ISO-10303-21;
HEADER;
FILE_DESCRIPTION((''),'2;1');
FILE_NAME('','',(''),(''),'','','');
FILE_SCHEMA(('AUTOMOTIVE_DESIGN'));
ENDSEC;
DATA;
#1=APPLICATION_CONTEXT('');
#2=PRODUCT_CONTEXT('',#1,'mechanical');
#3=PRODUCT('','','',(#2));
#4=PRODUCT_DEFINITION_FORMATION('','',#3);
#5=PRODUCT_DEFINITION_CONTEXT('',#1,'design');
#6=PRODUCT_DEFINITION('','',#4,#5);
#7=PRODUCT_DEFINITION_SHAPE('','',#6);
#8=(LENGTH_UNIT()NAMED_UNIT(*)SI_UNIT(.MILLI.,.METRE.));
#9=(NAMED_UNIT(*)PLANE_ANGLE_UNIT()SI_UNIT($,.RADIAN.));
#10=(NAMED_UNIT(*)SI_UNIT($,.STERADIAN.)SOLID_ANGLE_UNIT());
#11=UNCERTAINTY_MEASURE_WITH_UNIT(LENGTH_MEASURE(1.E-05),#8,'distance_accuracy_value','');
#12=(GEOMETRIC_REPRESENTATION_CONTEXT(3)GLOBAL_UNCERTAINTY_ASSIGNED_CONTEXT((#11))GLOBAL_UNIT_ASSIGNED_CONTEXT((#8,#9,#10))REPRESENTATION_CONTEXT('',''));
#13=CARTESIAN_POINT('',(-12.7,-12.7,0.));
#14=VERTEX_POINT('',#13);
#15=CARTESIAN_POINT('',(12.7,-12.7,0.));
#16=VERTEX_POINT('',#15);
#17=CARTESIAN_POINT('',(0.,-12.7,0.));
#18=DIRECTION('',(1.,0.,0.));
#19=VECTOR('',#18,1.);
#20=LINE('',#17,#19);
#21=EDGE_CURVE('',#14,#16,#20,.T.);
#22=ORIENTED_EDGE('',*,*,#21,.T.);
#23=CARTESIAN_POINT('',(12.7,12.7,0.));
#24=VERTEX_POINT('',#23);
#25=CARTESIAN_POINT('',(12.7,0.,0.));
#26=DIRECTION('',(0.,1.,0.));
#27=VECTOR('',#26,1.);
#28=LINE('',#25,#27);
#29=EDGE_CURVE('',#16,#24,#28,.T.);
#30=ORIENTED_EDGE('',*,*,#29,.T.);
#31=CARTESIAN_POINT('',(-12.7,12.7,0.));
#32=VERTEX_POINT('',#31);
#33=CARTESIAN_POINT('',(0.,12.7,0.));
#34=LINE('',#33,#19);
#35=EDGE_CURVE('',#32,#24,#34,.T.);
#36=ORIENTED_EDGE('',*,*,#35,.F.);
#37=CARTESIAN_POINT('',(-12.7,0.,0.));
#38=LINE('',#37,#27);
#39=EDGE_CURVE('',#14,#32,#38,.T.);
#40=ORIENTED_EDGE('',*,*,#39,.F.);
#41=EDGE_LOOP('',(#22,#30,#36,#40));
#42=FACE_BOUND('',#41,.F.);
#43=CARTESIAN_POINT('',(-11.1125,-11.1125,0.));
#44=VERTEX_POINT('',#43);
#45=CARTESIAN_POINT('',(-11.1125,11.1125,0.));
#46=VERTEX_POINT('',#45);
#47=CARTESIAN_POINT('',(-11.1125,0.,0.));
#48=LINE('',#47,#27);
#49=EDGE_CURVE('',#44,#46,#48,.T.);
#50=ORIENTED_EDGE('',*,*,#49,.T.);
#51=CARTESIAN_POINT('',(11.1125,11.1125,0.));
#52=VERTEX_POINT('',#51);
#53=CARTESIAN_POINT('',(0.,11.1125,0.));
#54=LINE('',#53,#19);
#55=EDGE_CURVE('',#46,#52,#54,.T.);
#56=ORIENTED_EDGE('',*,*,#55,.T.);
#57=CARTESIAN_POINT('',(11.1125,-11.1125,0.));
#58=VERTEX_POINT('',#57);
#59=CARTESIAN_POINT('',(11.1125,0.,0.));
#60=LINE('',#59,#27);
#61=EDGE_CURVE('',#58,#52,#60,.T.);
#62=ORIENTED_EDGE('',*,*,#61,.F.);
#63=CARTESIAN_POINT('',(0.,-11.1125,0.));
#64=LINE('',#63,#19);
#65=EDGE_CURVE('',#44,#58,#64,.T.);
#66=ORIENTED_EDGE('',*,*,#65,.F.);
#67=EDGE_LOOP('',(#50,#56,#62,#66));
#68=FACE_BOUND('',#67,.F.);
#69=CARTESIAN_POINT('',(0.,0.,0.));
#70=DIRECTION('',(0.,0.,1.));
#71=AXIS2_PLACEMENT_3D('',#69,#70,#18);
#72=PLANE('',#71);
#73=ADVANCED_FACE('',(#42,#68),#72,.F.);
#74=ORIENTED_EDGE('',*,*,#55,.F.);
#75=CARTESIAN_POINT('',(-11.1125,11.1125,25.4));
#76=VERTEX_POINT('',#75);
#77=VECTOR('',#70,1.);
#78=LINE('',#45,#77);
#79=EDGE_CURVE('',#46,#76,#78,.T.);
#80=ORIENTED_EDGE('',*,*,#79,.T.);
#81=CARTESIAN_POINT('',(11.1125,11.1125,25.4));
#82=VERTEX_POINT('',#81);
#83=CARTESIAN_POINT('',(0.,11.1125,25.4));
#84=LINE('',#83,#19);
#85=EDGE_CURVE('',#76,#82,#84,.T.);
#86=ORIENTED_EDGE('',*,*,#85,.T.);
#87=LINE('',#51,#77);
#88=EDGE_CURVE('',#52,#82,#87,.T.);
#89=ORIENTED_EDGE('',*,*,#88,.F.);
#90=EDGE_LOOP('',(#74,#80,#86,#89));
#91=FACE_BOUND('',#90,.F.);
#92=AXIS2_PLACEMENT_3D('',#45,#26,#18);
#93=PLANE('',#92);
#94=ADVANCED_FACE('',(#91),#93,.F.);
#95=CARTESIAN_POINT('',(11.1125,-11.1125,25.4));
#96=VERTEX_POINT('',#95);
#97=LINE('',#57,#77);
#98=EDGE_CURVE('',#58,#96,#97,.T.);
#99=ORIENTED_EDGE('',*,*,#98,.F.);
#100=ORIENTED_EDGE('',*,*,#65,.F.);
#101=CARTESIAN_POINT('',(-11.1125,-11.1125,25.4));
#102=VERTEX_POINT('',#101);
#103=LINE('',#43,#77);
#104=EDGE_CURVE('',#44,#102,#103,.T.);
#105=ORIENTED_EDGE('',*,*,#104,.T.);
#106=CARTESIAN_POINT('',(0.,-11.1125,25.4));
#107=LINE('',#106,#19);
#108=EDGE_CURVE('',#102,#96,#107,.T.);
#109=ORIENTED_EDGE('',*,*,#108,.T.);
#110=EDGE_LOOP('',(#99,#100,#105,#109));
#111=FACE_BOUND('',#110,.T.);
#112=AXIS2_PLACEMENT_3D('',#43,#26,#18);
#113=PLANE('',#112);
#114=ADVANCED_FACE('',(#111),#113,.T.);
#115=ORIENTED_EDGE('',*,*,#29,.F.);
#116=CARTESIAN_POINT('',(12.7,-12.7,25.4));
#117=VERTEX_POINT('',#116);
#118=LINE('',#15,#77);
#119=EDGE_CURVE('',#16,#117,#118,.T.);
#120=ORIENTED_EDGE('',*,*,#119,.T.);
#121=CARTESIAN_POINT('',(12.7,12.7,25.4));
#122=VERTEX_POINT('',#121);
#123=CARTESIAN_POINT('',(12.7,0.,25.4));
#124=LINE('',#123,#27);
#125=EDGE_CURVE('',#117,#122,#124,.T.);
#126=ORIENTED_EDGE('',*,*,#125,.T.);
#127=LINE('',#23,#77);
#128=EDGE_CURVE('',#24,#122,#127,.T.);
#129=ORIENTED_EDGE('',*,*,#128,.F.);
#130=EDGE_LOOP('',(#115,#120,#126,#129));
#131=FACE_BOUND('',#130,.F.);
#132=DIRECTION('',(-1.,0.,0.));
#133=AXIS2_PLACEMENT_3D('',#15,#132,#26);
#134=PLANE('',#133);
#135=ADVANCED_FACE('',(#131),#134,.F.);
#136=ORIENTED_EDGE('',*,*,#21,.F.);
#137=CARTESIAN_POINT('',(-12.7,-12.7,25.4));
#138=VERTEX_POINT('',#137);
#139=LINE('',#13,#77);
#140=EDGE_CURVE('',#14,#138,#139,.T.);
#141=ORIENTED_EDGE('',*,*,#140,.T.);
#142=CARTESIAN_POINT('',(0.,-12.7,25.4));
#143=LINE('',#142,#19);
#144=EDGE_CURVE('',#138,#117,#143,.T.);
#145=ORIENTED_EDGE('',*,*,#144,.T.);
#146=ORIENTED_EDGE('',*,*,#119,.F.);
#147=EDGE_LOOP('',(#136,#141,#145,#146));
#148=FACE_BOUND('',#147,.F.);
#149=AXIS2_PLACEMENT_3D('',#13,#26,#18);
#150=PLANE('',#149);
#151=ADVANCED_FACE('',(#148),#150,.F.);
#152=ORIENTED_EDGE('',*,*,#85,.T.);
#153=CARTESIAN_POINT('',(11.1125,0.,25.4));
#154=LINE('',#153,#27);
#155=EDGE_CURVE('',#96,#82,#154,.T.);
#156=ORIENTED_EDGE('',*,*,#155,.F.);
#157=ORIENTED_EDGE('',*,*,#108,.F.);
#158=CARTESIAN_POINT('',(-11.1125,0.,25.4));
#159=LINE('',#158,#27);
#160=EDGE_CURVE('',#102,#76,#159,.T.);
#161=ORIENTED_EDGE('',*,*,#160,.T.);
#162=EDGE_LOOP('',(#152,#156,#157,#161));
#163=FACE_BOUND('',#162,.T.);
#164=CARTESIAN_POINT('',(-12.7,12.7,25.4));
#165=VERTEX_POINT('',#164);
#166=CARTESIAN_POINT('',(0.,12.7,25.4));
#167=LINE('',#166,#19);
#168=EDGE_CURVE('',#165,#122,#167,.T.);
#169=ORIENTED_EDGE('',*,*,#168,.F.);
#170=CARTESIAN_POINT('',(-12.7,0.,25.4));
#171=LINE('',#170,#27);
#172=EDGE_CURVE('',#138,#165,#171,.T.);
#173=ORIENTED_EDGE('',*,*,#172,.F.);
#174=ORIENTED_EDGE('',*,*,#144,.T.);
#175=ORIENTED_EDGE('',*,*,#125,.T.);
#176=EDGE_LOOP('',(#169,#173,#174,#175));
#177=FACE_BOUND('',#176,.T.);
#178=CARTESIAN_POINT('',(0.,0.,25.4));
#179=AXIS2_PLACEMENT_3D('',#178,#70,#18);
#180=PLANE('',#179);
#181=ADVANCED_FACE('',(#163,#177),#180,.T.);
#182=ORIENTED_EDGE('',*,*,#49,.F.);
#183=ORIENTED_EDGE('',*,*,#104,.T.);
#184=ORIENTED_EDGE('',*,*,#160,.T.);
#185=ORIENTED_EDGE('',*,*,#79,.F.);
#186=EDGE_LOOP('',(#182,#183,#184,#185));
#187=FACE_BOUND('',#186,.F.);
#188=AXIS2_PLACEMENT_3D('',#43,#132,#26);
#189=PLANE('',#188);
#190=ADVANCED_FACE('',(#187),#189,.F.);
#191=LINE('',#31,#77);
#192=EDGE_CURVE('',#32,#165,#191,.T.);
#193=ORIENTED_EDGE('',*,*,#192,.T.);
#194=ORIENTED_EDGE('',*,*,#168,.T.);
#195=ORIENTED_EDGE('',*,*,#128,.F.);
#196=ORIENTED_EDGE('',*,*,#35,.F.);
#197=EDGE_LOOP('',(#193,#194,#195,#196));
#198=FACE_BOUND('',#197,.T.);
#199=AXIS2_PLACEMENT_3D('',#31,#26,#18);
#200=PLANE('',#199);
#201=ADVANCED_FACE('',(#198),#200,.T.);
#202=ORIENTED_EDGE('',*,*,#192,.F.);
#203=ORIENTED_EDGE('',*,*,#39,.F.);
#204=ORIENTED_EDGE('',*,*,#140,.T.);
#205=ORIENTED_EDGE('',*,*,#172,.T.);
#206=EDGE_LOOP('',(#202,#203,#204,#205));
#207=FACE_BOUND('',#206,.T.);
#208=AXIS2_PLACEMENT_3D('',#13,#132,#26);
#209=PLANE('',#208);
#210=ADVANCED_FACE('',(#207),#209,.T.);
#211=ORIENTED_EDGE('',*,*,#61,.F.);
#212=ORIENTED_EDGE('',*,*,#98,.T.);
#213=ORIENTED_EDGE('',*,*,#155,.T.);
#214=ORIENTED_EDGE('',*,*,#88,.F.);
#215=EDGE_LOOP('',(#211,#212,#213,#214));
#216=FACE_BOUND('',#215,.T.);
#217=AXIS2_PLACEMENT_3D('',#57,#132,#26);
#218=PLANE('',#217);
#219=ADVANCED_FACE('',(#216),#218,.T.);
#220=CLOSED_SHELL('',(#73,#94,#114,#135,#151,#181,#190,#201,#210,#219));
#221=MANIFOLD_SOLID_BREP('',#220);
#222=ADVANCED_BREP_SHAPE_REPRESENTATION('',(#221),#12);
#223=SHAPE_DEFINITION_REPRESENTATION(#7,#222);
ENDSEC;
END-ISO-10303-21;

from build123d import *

# Parameters (mm, degrees)
F1_W     = 25.4
F1_H     = 25.4
F1_W_2   = 22.225
F1_H_2   = 22.225
F2_DEPTH = 25.4


# Not quite as in the source:
# - a variable given as a bare number and used for a length is read in inches; the dataset says mm whatever the document's units were


with BuildPart() as f2:
    # F1 (on Top) → F2 (new body)
    with BuildSketch(Plane.XY):
        Rectangle(F1_W, F1_H)
        Rectangle(F1_W_2, F1_H_2, mode=Mode.SUBTRACT)
    extrude(amount=F2_DEPTH)


solid = f2.part
